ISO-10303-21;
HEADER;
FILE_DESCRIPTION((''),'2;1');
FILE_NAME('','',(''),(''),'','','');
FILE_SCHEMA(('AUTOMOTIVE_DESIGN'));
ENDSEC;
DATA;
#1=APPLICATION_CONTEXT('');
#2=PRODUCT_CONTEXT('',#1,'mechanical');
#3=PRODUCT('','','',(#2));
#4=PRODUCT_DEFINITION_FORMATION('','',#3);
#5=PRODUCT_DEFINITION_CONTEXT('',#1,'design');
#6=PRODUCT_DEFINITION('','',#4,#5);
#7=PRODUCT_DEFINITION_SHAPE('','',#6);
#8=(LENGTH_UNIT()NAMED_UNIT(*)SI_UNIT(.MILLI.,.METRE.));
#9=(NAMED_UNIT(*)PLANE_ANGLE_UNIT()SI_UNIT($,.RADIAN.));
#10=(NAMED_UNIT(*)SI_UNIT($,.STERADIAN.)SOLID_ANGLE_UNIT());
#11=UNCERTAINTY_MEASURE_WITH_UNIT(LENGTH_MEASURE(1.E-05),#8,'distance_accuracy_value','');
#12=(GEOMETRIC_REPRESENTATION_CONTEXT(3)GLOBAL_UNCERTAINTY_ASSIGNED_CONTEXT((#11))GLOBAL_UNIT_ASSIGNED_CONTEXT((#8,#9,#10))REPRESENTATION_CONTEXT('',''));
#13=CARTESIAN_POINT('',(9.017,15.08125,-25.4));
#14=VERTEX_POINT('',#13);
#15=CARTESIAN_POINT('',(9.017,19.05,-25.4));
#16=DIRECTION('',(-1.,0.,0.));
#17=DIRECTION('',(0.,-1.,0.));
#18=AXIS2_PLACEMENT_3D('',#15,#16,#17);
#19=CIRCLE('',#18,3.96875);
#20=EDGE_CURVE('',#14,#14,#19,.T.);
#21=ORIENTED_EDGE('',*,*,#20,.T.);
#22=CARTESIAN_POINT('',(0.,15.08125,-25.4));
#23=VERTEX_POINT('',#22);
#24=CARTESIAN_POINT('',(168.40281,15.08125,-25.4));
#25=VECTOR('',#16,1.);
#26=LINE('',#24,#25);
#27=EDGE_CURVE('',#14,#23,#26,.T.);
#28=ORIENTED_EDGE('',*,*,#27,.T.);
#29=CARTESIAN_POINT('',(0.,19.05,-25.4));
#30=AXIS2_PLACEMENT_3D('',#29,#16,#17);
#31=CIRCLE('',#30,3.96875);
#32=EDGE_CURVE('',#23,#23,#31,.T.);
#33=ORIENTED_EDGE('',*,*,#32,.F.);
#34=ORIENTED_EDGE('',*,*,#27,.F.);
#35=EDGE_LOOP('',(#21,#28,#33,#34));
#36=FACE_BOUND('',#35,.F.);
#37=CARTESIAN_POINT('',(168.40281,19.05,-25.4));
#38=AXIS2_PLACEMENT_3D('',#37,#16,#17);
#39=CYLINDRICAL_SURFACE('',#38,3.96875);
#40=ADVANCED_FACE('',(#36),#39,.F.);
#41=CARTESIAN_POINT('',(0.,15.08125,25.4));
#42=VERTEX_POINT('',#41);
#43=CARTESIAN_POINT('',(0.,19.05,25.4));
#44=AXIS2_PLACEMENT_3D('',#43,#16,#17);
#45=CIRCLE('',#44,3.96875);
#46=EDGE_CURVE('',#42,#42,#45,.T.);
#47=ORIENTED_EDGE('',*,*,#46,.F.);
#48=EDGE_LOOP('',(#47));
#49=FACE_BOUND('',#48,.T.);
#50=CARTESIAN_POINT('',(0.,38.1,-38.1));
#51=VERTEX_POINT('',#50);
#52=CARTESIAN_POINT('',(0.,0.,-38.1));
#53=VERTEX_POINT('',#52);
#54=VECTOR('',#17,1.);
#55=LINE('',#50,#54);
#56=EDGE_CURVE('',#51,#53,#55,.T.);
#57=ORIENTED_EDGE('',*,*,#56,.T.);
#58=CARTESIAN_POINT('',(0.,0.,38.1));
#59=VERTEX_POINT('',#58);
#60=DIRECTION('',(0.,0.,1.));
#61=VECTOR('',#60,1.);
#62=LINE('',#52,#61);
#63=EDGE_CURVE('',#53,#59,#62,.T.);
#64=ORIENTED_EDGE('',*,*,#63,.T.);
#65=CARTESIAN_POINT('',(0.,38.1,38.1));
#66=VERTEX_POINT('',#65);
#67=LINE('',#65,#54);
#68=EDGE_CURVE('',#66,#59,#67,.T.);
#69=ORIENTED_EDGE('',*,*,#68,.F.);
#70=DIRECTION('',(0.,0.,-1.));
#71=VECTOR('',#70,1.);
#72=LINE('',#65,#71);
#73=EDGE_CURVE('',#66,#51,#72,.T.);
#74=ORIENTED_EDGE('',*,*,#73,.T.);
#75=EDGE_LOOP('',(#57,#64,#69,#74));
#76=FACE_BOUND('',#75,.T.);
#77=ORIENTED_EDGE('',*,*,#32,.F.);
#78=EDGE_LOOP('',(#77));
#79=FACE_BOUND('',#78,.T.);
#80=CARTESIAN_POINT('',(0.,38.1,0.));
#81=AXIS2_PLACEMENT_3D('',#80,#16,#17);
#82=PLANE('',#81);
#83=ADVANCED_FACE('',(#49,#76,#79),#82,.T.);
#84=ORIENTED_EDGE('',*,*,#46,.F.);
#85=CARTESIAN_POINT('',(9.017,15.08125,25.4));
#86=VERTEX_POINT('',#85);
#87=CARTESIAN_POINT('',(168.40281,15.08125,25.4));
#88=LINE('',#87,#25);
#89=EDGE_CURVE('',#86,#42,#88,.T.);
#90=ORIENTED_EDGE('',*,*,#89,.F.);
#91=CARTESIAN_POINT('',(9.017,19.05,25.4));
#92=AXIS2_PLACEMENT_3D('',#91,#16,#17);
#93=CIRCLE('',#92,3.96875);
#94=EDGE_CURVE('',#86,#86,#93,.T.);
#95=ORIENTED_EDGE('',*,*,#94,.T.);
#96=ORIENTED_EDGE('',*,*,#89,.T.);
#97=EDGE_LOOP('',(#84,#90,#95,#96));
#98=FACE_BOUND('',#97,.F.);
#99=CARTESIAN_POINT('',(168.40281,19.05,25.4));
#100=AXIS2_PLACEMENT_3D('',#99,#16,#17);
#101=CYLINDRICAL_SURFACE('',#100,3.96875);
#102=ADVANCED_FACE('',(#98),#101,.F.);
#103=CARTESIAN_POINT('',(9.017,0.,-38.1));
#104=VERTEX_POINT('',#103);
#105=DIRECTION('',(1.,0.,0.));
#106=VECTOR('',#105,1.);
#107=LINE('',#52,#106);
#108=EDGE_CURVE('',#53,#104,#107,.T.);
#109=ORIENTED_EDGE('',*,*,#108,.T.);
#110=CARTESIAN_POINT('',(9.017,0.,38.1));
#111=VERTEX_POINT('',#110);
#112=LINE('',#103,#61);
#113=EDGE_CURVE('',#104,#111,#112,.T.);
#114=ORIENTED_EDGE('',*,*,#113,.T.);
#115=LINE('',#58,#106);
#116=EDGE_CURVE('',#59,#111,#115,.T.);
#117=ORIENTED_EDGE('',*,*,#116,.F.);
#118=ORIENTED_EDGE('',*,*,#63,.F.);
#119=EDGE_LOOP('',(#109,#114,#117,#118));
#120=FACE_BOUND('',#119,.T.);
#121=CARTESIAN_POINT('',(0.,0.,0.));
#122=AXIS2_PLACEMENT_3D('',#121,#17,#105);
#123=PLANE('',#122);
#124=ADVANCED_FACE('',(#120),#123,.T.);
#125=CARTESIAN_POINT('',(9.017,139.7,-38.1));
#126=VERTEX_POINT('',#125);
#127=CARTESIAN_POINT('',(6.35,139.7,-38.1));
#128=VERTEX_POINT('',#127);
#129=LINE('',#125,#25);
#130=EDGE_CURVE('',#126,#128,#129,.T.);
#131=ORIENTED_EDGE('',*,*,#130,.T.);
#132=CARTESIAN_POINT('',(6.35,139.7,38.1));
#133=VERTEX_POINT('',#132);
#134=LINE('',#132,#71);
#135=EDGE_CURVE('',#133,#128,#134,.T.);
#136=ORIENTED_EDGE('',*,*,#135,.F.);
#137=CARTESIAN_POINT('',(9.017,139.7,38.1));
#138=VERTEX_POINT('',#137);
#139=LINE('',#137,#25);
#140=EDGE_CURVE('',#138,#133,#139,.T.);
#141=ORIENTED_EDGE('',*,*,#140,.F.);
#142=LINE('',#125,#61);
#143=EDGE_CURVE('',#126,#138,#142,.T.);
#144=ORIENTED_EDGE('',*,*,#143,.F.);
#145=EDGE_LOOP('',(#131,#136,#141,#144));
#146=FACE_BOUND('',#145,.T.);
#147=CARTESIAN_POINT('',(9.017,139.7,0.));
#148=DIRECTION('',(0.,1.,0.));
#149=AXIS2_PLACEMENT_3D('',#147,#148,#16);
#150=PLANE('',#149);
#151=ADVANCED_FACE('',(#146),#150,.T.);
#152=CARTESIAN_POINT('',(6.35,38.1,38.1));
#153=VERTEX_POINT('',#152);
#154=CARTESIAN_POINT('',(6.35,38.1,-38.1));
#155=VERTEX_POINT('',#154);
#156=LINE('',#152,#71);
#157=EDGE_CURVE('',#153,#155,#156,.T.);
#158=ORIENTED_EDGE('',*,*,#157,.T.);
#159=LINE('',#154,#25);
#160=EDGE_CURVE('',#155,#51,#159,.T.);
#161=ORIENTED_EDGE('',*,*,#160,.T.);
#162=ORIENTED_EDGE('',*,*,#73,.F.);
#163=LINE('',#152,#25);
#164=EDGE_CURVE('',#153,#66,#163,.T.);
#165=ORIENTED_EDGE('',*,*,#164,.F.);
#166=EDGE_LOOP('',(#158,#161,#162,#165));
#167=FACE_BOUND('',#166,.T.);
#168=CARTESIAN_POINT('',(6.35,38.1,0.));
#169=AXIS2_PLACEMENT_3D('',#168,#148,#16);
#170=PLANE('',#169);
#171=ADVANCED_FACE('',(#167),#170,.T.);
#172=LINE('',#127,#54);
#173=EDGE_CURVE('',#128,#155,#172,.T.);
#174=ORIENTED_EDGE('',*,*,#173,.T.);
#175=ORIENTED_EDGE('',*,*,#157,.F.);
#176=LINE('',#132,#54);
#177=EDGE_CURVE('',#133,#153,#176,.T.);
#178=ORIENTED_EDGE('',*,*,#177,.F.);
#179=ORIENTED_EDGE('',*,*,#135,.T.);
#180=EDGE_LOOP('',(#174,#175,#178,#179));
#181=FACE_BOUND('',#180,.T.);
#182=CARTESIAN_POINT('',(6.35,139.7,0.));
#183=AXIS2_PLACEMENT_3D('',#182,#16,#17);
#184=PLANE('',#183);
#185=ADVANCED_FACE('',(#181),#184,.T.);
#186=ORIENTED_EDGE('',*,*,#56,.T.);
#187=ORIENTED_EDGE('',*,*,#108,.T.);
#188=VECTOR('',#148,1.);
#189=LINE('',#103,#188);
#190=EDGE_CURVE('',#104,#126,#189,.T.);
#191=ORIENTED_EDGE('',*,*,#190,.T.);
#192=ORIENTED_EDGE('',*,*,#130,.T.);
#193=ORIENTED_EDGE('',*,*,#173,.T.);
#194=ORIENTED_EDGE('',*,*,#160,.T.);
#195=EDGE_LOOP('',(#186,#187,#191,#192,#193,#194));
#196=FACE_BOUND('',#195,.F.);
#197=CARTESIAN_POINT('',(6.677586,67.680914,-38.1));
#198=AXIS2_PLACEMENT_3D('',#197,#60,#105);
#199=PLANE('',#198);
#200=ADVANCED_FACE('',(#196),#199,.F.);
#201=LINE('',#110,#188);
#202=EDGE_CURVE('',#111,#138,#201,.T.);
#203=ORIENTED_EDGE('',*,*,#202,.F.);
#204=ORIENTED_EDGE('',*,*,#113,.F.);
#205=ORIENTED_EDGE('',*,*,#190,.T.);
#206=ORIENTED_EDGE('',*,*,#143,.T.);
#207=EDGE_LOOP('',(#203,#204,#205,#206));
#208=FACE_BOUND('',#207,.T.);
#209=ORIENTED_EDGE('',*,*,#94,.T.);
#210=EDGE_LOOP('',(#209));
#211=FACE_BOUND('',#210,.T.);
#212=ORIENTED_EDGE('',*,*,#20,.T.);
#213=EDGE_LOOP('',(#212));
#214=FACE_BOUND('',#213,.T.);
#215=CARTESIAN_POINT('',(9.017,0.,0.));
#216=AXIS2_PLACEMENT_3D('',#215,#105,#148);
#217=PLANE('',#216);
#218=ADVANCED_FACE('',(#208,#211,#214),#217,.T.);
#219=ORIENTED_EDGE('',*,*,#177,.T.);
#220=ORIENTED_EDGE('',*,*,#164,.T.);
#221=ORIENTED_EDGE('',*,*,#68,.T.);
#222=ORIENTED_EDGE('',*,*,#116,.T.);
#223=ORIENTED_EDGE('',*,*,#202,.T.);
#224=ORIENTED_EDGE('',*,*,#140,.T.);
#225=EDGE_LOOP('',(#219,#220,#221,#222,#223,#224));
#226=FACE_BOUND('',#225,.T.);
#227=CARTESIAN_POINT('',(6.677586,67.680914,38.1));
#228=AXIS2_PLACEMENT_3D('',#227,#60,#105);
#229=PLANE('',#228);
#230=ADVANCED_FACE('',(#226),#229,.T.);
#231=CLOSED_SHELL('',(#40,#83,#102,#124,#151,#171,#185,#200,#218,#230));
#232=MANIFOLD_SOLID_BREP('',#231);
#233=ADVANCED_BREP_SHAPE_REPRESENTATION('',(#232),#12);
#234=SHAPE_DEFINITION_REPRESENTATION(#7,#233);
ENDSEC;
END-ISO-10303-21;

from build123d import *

# Parameters (mm, degrees)
F1_DEPTH = 38.1
F3_D     = 7.9375


# Not quite as in the source:
# - a length typed as a fraction of an inch, garbled in the dataset ("3 / 203.2 mm" for 3/8 in), is restored


with BuildPart() as f1:
    # F0 (on Top) → F1 (new body, symmetric)
    with BuildSketch(Plane.XY):
        Polygon((0, 38.1), (0, 0), (9.017, 0), (9.017, 139.7), (6.35, 139.7), (6.35, 38.1), align=None)
    extrude(amount=F1_DEPTH, both=True)

    # F3 (through all)
    with Locations(Plane.YZ.offset(9.017)):
        with Locations((19.05, 25.4), (19.05, -25.4)):
            Hole(F3_D / 2)


solid = f1.part
